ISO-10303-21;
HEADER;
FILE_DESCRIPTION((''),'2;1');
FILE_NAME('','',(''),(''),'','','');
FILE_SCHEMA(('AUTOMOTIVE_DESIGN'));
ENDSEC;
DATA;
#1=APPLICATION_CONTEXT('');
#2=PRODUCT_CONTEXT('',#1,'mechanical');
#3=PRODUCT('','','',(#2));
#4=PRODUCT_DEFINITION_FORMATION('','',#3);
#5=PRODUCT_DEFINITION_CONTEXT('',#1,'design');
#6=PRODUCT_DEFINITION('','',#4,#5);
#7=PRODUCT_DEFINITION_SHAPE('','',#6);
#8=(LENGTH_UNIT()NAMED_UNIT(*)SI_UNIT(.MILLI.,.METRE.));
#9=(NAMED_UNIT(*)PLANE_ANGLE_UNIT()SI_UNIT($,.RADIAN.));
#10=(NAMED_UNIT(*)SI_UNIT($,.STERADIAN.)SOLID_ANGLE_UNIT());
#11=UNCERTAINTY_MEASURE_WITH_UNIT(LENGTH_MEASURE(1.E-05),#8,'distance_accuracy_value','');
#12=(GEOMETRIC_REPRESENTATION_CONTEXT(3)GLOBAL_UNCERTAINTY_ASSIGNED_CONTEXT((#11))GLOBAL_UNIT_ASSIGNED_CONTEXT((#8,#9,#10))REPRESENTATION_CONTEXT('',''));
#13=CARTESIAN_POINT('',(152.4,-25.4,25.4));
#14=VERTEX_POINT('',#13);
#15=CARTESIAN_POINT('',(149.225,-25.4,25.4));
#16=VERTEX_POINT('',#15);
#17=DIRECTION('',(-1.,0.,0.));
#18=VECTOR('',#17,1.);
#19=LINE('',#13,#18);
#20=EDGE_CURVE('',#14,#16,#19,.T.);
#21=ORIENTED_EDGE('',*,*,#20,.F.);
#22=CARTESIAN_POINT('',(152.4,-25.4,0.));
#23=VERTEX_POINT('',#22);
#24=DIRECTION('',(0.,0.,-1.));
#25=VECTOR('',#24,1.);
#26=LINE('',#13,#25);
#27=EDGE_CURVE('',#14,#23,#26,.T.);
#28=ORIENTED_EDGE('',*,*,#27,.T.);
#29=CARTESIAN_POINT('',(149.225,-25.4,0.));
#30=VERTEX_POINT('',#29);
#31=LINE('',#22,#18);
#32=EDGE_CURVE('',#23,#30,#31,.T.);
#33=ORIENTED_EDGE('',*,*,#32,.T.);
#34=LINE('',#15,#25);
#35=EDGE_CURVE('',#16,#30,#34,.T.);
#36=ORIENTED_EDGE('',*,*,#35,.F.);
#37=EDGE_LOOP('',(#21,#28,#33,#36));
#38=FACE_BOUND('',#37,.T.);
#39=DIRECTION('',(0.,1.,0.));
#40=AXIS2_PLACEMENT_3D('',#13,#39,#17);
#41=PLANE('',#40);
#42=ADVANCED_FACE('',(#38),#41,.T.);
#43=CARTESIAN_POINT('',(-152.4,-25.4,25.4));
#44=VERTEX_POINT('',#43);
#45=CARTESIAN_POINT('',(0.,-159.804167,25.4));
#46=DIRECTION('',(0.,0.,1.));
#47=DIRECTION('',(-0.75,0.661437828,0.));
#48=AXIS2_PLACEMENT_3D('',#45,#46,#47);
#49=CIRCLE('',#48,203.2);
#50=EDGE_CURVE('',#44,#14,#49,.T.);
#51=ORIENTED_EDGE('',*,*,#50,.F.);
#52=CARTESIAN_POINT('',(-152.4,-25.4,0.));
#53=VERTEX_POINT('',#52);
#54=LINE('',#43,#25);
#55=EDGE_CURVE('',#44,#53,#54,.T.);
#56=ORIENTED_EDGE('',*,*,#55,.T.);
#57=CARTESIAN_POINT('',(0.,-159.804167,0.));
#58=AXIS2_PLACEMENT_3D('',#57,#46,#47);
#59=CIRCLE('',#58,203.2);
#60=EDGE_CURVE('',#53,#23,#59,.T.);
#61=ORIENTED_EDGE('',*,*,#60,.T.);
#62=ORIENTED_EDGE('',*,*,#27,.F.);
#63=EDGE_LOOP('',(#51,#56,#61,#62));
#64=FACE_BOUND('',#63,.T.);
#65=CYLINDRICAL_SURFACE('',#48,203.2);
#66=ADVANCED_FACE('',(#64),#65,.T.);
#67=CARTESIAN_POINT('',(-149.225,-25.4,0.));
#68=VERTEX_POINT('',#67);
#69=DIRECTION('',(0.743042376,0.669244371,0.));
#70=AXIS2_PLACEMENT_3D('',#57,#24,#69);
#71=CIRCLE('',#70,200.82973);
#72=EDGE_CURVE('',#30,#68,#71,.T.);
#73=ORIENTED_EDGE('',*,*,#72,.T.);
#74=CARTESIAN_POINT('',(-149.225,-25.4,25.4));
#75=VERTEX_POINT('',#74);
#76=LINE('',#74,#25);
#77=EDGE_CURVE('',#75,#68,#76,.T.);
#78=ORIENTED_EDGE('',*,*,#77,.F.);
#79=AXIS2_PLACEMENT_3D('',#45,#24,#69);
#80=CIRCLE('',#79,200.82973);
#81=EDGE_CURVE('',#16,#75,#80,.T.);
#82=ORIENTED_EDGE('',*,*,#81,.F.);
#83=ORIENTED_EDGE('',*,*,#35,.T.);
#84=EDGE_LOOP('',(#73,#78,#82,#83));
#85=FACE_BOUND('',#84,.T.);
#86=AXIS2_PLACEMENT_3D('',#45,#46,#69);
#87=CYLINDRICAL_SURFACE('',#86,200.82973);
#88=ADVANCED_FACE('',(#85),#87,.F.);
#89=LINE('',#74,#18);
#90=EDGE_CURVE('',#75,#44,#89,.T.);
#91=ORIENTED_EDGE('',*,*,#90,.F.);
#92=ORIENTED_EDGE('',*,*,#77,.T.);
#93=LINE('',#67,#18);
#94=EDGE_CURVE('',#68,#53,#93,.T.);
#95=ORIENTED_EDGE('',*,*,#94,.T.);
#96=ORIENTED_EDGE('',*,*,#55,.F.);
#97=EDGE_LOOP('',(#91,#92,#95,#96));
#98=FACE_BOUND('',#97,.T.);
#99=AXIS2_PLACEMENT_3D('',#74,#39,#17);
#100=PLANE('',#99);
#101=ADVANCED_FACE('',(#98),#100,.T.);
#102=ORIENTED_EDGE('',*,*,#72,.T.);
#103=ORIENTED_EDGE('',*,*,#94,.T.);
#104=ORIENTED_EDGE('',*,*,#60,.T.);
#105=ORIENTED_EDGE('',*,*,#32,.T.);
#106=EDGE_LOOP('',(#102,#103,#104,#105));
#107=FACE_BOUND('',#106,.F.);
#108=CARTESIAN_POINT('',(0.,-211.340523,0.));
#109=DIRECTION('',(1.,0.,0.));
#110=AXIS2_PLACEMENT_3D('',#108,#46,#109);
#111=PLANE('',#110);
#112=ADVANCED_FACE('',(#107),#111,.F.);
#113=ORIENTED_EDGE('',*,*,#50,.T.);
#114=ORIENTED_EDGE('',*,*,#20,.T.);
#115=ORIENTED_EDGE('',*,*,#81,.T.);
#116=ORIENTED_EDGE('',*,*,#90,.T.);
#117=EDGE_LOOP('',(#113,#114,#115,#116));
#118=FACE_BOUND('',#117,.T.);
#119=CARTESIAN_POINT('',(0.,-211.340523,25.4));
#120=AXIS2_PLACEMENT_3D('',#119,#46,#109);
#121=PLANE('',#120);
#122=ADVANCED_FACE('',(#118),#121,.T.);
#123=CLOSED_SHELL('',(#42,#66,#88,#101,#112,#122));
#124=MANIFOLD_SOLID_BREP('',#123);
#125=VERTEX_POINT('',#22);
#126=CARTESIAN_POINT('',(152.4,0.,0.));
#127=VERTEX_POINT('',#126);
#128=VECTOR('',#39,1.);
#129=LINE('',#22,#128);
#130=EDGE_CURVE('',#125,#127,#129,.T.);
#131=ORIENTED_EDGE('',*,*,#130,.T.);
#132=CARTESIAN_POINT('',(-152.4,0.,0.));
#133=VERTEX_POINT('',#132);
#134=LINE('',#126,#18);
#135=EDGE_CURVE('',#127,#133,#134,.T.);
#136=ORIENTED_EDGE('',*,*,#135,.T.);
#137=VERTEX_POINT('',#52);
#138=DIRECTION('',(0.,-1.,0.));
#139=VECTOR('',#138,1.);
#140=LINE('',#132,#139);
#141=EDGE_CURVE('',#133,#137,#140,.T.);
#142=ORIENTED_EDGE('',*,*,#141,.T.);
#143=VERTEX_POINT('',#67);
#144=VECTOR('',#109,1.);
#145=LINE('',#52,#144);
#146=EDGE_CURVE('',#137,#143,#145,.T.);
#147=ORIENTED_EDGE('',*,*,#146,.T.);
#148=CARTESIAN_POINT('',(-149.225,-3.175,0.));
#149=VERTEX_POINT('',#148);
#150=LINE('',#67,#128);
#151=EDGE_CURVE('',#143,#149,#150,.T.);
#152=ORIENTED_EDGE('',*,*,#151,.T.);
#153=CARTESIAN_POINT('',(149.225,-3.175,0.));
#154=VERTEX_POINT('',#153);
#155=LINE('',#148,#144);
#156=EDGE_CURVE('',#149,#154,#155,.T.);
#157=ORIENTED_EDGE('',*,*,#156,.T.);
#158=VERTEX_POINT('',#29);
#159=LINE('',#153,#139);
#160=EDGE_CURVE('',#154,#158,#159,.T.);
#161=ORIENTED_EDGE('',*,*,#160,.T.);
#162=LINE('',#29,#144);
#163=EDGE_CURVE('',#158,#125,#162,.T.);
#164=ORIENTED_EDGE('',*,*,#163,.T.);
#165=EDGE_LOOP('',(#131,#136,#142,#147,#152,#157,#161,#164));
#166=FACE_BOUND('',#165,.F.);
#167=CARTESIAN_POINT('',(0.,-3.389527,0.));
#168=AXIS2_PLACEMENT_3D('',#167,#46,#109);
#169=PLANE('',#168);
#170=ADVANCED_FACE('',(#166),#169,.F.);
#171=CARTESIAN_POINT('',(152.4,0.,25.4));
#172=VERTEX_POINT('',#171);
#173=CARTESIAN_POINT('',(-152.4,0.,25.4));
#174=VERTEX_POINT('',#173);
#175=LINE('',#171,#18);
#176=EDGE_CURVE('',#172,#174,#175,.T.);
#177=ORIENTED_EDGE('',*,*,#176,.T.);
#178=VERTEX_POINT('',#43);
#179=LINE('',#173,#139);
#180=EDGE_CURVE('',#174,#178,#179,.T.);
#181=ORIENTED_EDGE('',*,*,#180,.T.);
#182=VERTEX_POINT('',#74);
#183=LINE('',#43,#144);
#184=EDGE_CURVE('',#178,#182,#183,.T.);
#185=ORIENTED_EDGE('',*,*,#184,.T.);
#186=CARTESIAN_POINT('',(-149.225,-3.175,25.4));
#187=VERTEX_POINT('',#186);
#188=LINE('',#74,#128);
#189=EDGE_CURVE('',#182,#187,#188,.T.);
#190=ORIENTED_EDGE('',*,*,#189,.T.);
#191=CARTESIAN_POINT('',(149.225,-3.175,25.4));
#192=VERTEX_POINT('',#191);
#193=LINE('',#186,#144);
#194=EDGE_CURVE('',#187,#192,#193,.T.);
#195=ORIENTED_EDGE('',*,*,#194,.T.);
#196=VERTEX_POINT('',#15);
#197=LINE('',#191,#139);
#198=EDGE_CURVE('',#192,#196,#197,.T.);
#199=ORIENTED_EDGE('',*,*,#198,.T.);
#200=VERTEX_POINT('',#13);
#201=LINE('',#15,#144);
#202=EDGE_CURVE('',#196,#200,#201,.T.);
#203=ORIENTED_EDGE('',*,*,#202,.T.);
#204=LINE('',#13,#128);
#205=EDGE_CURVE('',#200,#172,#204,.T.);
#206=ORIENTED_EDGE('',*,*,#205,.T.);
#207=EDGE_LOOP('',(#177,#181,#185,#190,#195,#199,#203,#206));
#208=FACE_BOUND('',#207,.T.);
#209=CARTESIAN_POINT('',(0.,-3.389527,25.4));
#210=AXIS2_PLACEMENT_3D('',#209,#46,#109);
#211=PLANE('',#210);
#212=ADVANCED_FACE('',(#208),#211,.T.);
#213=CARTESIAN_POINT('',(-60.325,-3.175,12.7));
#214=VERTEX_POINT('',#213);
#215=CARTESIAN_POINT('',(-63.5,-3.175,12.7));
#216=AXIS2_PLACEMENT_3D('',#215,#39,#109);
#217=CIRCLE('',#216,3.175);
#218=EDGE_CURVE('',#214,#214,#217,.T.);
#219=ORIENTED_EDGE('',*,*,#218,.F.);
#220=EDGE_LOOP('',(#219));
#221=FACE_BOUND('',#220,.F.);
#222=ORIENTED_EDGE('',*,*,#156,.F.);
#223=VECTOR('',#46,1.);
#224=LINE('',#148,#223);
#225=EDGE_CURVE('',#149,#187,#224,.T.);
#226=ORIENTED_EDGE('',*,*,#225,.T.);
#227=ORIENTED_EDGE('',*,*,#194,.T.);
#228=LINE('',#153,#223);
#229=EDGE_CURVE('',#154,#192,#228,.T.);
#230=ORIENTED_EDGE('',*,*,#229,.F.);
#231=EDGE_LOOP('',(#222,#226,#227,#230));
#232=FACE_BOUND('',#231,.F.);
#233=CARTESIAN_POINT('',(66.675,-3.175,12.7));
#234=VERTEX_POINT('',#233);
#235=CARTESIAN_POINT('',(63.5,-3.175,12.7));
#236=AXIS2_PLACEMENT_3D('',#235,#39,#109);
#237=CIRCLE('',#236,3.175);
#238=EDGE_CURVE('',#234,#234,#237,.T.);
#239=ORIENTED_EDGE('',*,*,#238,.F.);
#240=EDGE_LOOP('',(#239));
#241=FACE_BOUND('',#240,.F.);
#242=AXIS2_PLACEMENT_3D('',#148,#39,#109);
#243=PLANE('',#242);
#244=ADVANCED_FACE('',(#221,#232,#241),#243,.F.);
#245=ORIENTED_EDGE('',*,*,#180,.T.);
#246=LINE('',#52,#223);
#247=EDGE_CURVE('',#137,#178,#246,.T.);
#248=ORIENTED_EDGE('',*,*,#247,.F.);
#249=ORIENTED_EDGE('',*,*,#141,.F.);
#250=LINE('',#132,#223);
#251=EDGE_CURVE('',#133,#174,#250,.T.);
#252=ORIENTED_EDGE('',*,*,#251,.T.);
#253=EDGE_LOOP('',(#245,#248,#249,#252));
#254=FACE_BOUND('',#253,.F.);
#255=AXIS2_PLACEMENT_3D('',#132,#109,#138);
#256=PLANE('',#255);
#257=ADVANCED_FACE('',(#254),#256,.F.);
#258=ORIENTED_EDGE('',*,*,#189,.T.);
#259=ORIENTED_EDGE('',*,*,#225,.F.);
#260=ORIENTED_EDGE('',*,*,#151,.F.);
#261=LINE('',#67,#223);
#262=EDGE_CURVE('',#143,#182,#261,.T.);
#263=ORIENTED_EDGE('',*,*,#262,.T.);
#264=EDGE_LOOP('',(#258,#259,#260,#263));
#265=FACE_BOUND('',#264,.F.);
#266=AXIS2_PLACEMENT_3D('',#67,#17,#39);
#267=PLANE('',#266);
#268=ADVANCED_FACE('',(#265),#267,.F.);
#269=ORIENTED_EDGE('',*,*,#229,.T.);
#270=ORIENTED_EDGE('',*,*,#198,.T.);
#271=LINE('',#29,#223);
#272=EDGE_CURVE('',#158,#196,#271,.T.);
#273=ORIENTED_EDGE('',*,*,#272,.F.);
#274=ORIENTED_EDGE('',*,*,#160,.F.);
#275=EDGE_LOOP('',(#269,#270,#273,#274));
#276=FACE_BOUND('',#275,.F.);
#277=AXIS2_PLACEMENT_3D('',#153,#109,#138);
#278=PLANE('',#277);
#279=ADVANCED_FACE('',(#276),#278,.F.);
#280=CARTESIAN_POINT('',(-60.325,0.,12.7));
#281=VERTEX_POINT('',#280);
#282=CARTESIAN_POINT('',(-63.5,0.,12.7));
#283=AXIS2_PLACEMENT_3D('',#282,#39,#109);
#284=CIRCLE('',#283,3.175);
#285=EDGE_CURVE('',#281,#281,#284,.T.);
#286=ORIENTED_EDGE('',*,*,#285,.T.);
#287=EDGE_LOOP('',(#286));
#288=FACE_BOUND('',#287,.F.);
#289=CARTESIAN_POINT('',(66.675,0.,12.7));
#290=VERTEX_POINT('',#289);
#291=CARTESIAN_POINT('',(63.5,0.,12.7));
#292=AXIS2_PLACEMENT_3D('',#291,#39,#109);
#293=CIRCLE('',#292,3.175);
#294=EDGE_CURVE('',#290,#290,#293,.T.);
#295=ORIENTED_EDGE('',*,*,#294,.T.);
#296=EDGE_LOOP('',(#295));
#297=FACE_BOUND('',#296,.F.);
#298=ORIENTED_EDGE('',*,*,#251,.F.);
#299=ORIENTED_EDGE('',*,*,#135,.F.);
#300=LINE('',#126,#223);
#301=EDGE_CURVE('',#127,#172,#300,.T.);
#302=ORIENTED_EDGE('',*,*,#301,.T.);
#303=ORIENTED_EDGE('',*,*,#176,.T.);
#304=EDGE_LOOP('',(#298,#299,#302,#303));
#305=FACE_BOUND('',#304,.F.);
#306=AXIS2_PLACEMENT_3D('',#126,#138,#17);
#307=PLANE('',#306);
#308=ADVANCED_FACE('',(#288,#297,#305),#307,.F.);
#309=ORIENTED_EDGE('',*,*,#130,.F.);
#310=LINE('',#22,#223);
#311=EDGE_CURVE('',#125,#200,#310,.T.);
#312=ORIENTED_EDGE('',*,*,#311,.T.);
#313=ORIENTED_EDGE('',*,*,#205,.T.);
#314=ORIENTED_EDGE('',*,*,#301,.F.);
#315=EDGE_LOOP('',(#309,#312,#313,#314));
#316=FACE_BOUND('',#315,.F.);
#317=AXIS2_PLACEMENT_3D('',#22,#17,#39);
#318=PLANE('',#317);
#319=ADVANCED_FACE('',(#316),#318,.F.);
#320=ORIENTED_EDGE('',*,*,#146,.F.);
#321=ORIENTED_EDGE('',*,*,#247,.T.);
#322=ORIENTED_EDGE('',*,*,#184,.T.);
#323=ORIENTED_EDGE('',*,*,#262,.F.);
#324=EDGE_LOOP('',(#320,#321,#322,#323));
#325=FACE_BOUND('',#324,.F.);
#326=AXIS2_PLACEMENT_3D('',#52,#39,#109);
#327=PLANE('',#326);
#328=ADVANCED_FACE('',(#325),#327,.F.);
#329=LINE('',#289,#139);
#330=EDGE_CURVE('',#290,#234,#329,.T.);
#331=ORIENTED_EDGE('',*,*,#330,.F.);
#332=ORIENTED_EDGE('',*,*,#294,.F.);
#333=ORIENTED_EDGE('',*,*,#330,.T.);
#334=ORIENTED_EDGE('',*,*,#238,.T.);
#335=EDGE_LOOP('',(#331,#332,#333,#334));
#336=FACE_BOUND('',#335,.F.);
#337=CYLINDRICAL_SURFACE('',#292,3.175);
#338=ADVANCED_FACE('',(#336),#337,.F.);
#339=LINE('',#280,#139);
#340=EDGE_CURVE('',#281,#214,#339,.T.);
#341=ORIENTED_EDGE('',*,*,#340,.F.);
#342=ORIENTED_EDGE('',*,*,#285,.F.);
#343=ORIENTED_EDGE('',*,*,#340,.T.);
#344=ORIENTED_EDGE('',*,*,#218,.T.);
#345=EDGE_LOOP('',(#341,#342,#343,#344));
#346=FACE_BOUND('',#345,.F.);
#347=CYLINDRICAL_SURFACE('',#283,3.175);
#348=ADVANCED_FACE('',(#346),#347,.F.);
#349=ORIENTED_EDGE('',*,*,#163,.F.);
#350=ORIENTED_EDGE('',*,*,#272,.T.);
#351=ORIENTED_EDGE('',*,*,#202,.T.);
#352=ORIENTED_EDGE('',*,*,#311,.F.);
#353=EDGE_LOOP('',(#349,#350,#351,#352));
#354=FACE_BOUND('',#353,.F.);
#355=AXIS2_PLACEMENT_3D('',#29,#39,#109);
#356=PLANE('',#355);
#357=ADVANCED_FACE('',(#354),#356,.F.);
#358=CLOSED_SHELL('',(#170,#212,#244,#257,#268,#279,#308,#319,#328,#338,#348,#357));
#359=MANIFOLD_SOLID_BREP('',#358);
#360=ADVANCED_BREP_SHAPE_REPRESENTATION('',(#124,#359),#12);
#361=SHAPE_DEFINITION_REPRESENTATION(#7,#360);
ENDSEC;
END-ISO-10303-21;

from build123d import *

# Parameters (mm, degrees)
F1_DEPTH = 25.4
F3_DEPTH = 25.4
F5_DEPTH = 363.0051666021


with BuildPart() as f1:
    # F0 (on Top) → F1 (new body)
    with BuildSketch(Plane.XY):
        Polygon((152.4, 0), (-152.4, 0), (-152.4, -25.4), (-149.225, -25.4), (-149.225, -3.175), (149.225, -3.175), (149.225, -25.4), (152.4, -25.4), align=None)
    extrude(amount=F1_DEPTH)

    # F4 (on face) → F5 (cut, through all)
    with BuildSketch(Plane(origin=(0, 0, 0), x_dir=(-1, 0, 0), z_dir=(0, 1, 0))):
        with BuildLine():
            ThreePointArc((-60.325, 12.7), (-63.5, 15.875), (-66.675, 12.7))
            Line((-66.675, 12.7), (-60.325, 12.7))
        make_face()
        with BuildLine():
            ThreePointArc((66.675, 12.7), (63.5, 15.875), (60.325, 12.7))
            Line((60.325, 12.7), (66.675, 12.7))
        make_face()
        with BuildLine():
            Line((66.675, 12.7), (60.325, 12.7))
            ThreePointArc((60.325, 12.7), (63.5, 9.525), (66.675, 12.7))
        make_face()
        with BuildLine():
            Line((-60.325, 12.7), (-66.675, 12.7))
            ThreePointArc((-66.675, 12.7), (-63.5, 9.525), (-60.325, 12.7))
        make_face()
    extrude(amount=-F5_DEPTH, mode=Mode.SUBTRACT)


with BuildPart() as f3:
    # F2 (on face) → F3 (new body)
    with BuildSketch(Plane.XY.offset(25.4)):
        with BuildLine():
            Line((-149.225, -25.4), (-152.4, -25.4))
            ThreePointArc((-152.4, -25.4), (0, -363.0041666021), (152.4, -25.4))
            Line((152.4, -25.4), (149.225, -25.4))
            ThreePointArc((149.225, -25.4), (0, -360.6338970331), (-149.225, -25.4))
        make_face()
    extrude(amount=-F3_DEPTH)


solid = Compound([f1.part, f3.part])
